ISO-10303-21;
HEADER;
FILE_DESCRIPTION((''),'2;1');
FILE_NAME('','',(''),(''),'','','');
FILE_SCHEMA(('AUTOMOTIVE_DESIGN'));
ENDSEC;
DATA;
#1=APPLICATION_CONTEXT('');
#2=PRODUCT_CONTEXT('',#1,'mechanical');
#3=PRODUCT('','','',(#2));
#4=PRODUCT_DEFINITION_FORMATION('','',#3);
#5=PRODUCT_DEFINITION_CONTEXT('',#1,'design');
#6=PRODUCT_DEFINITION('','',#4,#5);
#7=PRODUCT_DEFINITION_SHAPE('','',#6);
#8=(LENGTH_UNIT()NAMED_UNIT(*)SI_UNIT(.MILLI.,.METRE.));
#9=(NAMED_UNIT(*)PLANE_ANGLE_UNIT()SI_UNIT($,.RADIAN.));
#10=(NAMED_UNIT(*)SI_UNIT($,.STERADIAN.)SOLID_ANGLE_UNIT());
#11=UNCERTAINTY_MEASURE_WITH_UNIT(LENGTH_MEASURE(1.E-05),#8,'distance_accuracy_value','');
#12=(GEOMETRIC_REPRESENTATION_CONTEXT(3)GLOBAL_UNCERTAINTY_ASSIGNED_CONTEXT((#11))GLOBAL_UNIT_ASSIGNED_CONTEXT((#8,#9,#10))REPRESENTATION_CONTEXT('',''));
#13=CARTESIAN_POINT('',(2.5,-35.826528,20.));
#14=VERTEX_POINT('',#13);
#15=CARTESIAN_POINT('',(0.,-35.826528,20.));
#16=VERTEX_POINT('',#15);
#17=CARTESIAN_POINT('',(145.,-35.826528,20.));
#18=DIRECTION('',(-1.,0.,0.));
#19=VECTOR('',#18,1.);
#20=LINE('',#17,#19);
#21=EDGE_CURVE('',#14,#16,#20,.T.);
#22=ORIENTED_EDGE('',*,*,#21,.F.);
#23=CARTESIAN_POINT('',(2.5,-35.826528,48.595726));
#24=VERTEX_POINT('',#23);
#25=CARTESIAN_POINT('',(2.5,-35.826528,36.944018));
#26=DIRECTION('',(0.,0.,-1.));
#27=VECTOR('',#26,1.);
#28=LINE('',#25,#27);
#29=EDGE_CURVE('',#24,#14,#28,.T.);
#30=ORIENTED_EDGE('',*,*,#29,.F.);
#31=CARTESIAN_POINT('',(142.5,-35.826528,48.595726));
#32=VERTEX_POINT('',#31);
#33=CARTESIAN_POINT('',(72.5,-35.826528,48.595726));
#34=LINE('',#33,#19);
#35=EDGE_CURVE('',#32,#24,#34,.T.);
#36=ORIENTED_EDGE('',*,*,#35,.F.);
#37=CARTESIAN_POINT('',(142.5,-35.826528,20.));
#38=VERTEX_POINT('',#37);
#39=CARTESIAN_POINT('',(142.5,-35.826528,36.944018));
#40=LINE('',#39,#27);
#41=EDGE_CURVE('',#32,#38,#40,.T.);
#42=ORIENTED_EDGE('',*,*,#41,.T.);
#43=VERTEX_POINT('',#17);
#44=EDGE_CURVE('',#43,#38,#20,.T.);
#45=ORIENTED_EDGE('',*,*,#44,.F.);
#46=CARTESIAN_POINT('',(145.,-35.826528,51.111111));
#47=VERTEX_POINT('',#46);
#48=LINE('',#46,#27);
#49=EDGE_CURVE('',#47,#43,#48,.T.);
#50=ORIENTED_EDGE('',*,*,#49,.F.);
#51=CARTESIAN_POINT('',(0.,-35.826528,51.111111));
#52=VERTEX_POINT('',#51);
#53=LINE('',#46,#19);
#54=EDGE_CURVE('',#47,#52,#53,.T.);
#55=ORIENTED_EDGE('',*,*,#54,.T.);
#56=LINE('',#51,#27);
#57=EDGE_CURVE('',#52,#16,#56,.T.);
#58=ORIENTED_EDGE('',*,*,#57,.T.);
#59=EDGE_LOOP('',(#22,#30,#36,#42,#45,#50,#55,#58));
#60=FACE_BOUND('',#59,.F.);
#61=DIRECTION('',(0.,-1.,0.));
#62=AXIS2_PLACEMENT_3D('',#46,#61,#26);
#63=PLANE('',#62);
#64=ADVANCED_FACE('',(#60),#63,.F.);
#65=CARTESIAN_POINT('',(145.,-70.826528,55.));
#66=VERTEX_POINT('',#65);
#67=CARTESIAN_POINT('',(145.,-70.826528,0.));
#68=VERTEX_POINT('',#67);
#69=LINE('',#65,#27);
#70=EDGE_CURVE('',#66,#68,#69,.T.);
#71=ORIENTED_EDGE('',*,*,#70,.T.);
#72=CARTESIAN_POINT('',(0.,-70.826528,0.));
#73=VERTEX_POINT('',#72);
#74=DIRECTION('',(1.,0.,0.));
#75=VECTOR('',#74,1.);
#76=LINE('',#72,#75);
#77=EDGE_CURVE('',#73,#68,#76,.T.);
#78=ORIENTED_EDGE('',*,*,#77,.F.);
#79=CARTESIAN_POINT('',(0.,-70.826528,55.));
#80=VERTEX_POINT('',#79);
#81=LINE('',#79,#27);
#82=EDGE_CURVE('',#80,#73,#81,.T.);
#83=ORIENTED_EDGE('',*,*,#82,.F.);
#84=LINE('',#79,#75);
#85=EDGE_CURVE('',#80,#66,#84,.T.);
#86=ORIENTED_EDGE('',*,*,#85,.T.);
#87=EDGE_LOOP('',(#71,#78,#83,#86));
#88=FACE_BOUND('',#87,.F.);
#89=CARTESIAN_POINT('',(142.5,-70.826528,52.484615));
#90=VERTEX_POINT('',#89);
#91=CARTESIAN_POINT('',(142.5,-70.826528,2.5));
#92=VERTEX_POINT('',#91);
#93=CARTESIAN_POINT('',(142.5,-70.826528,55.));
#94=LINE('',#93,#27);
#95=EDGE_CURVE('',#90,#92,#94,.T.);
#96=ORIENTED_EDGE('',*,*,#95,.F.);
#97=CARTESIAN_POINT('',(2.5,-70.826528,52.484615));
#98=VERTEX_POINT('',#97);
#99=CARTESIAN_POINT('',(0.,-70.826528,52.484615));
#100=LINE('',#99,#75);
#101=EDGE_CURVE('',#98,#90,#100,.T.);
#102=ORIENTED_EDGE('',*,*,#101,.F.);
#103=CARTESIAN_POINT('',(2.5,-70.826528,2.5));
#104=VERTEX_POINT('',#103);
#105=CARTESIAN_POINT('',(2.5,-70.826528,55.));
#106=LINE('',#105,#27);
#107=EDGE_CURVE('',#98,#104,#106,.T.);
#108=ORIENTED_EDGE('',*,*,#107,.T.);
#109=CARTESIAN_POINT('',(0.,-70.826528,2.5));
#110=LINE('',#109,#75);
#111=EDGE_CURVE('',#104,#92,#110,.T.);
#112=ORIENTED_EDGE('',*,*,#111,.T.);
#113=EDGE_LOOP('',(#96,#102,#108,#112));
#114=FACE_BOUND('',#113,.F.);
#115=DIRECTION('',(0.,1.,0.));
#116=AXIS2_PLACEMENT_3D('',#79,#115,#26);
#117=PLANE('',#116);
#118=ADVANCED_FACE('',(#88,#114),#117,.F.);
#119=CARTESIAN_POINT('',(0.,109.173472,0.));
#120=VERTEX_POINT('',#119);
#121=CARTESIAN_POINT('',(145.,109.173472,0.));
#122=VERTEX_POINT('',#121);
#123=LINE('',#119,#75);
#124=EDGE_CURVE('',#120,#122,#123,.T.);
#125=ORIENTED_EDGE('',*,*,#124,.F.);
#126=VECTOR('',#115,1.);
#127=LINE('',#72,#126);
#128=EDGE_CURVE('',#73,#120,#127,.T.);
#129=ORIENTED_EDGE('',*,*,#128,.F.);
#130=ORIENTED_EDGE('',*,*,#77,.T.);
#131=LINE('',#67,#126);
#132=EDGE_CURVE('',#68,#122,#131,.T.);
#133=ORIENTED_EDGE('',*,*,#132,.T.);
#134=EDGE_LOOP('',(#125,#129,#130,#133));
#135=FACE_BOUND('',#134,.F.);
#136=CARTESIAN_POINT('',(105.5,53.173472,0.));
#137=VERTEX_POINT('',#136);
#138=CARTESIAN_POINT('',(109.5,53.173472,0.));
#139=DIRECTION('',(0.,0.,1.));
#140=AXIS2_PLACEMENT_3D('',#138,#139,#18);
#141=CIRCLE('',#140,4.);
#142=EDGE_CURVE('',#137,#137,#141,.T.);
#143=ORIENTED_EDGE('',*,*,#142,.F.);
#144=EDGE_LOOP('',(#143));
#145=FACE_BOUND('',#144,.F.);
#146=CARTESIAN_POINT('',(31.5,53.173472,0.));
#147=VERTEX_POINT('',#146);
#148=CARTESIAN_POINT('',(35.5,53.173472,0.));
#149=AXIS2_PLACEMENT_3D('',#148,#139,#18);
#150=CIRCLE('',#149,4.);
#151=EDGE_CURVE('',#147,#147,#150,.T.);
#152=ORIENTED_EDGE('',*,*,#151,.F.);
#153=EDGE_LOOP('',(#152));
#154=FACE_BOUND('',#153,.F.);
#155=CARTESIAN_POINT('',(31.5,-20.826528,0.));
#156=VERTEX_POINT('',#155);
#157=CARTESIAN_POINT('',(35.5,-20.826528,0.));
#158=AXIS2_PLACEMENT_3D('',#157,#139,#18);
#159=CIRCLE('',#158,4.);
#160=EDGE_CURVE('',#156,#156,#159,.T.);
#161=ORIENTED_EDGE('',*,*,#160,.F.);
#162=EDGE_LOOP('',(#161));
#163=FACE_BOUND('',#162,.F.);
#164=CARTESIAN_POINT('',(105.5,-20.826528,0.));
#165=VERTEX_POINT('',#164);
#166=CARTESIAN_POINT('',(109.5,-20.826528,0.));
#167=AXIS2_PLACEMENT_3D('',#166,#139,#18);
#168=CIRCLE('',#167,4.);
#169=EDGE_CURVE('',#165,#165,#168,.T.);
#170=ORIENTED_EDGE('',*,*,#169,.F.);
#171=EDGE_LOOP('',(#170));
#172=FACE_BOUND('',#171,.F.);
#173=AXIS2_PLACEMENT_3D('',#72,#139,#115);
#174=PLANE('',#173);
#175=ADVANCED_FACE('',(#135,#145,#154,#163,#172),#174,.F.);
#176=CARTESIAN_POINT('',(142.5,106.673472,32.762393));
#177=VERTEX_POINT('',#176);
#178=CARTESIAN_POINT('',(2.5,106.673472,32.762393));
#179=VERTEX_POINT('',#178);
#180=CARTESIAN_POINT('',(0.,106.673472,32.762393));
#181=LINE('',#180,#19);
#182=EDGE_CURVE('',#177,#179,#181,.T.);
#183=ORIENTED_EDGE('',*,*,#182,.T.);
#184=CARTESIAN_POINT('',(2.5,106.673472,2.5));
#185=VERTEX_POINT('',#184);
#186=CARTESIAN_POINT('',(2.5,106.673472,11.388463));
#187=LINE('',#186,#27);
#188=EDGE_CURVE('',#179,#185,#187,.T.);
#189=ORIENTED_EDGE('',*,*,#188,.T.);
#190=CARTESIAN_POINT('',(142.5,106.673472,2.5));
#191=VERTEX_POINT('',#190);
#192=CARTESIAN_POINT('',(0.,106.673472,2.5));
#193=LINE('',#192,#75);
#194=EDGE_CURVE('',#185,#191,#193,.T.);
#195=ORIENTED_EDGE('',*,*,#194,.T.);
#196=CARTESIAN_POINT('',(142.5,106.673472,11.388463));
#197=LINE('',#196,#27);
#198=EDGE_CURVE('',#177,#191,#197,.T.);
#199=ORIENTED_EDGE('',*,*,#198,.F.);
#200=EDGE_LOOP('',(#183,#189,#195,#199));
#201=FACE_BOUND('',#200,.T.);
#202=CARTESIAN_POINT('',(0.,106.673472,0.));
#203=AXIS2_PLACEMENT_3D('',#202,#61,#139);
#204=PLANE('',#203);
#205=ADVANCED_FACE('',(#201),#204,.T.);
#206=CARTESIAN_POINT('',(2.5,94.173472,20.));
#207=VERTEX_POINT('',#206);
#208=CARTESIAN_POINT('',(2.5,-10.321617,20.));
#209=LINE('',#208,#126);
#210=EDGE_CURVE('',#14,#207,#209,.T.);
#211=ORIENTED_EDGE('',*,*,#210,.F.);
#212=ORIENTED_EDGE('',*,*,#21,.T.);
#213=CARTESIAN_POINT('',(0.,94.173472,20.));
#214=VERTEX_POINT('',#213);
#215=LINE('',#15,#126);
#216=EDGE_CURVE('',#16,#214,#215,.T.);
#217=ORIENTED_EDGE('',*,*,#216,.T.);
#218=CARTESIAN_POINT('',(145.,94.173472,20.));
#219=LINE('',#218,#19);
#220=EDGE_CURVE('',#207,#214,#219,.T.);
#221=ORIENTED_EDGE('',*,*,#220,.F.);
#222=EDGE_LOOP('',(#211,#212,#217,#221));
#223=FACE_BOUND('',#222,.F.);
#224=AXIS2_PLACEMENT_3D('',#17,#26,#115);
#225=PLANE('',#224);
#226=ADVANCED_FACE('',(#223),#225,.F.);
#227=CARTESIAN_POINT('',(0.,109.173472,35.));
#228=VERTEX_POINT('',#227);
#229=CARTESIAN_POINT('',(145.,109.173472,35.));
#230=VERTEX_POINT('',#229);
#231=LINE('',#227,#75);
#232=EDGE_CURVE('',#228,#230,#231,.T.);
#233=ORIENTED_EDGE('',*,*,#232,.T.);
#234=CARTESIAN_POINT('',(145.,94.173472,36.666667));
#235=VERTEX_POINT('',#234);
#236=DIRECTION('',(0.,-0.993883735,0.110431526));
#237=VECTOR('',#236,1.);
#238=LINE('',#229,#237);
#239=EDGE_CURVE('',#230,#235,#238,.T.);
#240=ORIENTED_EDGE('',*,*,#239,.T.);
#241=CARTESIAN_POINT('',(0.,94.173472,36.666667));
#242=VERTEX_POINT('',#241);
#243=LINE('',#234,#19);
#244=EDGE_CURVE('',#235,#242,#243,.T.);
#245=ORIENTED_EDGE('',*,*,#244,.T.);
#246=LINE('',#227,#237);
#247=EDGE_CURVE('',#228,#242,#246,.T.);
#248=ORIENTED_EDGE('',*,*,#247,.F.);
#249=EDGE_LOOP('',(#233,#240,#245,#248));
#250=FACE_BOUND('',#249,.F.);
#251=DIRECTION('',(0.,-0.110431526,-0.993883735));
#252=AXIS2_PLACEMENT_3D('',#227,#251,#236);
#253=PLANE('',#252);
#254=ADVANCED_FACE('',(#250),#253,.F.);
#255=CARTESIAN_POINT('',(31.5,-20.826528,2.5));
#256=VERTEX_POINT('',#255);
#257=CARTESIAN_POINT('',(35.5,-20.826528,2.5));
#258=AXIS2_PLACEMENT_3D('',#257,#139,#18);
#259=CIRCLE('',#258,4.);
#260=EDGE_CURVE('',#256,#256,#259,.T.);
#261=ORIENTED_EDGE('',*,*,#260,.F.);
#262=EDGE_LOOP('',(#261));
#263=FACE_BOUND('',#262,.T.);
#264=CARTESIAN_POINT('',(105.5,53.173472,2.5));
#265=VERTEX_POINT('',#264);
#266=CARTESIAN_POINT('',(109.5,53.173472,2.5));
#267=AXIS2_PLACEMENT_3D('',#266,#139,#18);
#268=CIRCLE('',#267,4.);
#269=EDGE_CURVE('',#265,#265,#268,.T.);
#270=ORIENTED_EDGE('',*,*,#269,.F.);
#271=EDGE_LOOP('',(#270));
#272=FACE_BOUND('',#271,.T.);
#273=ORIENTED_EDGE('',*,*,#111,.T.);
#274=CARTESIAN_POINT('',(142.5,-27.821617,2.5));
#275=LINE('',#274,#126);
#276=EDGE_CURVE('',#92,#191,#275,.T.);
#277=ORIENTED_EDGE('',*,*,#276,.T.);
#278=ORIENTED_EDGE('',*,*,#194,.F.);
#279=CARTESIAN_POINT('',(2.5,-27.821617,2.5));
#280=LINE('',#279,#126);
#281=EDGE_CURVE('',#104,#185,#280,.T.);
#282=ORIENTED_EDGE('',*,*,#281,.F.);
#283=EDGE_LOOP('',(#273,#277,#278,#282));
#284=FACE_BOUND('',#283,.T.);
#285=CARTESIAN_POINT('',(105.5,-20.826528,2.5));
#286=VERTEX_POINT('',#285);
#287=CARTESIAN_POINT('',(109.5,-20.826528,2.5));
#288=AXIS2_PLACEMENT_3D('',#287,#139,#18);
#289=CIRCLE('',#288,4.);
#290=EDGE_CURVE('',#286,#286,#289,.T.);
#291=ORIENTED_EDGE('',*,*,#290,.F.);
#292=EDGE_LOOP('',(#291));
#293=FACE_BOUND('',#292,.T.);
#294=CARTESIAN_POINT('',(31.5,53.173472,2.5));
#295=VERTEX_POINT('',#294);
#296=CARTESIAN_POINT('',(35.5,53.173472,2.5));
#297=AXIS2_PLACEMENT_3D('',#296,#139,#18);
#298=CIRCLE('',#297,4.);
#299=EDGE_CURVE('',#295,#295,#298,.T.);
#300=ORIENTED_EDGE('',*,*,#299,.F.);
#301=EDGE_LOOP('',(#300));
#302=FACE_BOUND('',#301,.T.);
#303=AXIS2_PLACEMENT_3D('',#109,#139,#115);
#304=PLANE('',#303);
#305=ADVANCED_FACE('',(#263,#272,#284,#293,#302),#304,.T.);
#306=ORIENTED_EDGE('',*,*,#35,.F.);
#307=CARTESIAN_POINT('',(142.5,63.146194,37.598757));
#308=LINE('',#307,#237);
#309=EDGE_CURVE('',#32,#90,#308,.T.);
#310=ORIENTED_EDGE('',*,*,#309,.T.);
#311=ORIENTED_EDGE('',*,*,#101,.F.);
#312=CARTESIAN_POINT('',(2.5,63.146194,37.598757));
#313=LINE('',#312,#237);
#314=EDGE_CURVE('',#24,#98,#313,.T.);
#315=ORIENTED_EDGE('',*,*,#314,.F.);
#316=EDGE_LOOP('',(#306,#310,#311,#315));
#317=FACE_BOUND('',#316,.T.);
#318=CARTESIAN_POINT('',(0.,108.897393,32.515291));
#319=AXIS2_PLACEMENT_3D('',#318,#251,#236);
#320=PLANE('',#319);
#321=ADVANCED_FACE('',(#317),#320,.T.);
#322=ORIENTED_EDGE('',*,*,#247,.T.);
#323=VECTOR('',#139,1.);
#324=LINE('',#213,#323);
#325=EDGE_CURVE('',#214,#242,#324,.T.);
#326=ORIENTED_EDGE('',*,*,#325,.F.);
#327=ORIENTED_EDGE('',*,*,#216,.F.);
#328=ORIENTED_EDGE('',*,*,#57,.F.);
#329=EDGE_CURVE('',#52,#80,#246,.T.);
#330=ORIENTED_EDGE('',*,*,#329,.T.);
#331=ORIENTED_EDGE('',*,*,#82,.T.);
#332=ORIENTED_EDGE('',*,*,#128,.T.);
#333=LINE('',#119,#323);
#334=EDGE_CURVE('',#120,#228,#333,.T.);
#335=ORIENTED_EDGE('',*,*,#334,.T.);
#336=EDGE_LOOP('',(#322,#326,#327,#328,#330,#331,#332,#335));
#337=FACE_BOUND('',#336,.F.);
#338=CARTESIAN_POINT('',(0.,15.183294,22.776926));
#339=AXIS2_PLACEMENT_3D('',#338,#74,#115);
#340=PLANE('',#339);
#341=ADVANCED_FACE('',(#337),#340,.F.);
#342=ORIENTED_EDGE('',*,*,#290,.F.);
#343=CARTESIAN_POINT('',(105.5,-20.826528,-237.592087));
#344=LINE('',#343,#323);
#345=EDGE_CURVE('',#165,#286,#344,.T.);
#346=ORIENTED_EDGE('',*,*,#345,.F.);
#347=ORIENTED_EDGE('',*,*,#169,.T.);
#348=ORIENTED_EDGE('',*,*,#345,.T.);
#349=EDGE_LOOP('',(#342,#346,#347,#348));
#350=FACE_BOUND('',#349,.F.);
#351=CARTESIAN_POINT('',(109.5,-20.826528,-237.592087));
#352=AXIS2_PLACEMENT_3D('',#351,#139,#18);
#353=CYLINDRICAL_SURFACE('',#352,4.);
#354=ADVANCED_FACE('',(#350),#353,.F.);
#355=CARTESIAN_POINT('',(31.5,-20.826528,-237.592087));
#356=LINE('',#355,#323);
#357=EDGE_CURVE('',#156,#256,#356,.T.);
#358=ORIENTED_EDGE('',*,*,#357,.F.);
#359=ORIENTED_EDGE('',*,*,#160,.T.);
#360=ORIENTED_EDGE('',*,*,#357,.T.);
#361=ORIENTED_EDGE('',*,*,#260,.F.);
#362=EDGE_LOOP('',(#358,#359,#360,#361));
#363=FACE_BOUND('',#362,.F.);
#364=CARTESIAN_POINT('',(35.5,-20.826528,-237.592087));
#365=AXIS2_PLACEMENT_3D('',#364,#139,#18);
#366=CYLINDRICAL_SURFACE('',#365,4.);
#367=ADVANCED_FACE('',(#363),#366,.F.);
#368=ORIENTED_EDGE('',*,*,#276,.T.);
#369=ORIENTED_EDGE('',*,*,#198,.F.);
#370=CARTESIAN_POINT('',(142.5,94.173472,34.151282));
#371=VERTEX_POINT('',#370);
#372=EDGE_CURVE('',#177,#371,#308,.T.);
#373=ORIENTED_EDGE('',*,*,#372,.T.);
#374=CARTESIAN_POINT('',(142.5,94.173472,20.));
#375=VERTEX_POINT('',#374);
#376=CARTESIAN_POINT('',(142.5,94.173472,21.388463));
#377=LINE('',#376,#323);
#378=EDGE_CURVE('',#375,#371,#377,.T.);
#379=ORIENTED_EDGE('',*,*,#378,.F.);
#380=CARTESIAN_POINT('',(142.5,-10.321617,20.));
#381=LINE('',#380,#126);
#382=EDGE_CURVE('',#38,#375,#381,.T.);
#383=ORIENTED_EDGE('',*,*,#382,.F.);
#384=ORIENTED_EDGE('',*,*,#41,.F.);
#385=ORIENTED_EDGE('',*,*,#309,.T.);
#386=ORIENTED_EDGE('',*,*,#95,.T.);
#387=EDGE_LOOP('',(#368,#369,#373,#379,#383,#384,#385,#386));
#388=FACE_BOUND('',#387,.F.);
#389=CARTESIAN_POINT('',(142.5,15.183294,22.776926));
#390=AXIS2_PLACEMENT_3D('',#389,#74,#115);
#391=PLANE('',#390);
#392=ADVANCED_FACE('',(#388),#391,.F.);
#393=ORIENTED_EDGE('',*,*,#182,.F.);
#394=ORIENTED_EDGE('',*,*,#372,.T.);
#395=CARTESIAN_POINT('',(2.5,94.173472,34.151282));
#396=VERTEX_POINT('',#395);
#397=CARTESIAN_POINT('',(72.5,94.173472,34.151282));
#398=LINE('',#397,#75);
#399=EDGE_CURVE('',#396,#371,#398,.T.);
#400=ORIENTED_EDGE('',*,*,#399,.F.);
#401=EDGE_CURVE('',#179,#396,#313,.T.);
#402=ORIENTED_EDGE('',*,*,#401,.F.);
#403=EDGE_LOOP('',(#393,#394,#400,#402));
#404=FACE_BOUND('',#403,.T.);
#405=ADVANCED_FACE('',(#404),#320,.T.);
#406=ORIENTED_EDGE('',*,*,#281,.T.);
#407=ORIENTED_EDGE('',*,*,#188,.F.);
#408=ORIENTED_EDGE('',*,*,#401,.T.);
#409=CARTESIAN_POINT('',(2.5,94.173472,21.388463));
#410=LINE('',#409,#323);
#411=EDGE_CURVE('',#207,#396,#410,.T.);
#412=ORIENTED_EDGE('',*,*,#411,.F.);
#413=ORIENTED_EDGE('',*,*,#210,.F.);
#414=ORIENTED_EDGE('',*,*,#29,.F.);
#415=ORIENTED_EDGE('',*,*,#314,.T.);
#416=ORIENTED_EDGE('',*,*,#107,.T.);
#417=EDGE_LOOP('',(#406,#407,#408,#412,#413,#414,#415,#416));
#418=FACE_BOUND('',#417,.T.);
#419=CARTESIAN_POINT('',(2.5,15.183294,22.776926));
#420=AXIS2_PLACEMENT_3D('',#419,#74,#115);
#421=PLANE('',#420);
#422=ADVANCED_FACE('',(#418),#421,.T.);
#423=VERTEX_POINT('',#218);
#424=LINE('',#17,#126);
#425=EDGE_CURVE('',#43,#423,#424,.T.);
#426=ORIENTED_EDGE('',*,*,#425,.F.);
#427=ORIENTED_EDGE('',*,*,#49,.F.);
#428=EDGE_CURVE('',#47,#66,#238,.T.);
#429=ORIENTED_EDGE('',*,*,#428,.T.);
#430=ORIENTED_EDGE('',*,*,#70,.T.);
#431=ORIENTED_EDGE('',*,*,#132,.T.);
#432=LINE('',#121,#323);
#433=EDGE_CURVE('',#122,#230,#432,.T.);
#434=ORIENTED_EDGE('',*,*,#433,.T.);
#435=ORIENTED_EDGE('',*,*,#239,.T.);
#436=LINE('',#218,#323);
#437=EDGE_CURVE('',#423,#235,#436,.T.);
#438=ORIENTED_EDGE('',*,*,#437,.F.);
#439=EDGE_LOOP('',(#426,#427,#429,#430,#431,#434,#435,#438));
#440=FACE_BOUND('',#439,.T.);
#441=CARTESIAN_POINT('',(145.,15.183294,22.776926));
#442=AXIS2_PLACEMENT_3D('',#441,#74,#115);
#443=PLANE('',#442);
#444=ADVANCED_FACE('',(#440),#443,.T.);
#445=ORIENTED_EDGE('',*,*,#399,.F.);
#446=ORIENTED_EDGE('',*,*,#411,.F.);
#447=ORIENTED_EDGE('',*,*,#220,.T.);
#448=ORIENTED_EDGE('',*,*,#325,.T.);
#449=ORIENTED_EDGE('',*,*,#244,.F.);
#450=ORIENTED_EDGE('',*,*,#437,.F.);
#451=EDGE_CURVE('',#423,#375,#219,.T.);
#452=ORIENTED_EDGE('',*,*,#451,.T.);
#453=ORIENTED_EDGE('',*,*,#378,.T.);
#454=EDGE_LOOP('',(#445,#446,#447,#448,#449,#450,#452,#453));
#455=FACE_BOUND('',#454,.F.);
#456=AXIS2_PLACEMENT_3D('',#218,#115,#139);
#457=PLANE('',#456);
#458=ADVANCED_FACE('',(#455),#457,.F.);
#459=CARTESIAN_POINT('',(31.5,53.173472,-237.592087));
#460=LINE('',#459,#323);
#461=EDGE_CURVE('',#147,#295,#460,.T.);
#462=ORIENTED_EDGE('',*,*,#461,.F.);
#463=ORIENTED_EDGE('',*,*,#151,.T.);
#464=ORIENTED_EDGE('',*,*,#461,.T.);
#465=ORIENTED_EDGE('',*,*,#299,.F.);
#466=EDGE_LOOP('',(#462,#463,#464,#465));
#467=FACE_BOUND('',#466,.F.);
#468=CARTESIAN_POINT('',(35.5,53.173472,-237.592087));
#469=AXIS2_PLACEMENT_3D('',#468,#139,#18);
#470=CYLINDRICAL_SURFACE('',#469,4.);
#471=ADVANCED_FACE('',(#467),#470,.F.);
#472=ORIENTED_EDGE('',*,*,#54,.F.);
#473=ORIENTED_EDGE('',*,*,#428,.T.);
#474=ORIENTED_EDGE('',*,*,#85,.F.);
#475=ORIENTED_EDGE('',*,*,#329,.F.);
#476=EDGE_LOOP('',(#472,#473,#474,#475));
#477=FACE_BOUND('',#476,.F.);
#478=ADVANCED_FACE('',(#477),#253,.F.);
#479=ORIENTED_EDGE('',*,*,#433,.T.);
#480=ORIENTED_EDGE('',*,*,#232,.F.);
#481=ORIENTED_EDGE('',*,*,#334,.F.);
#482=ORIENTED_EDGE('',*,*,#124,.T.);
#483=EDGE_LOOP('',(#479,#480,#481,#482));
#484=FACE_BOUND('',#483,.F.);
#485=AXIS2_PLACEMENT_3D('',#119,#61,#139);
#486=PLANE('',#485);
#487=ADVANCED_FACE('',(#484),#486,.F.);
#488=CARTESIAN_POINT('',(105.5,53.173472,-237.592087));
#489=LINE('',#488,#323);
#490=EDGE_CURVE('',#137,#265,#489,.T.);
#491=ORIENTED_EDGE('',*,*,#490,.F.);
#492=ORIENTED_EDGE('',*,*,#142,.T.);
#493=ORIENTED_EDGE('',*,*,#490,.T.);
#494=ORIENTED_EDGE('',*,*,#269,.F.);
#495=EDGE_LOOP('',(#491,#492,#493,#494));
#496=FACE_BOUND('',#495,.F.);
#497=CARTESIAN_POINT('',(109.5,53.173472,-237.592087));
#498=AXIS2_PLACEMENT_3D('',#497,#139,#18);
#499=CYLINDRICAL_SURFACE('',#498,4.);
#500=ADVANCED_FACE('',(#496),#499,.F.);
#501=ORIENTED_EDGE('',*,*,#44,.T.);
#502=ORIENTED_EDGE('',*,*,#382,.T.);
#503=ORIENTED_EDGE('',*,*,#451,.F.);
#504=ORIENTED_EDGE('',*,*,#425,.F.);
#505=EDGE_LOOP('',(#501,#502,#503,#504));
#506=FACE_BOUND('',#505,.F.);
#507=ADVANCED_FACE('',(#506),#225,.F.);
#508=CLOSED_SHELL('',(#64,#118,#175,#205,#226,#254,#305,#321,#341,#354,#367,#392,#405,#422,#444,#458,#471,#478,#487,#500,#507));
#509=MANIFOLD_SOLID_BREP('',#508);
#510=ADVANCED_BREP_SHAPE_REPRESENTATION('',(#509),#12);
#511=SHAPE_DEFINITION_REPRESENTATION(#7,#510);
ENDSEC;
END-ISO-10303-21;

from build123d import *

# Parameters (mm, degrees)
F1_DEPTH = 145
F2_T     = -2.5
F4_DEPTH = 145
F6_D     = 8


# Not quite as in the source:
# - a feature names something its author has since deleted; it is built from what else it names


with BuildPart() as f1:
    # F0 (on Right) → F1 (new body)
    with BuildSketch(Plane.YZ):
        Polygon((109.173472161, 35), (-70.826527839, 55), (-70.826527839, 0), (109.173472161, 0), align=None)
    extrude(amount=F1_DEPTH)

    # F2
    f2_openings = [f1.faces().sort_by_distance(p)[0] for p in [
        (72.5, -70.826528, 27.5),
    ]]
    offset(amount=F2_T, openings=f2_openings)

    # F3 (on face) → F4 (cut)
    with BuildSketch(Plane.YZ.offset(145)):
        Polygon((94.173472161, 36.6666666667), (-35.826527839, 51.1111111111), (-35.826527839, 20), (94.173472161, 20), align=None)
    extrude(amount=-F4_DEPTH, mode=Mode.SUBTRACT)

    # F6 (through all)
    with Locations(Plane(origin=(0, 0, 0), x_dir=(1, 0, 0), z_dir=(0, 0, -1))):
        with Locations((109.5, 20.826527839), (35.5, 20.826527839), (35.5, -53.173472161), (109.5, -53.173472161)):
            Hole(F6_D / 2)


solid = f1.part
